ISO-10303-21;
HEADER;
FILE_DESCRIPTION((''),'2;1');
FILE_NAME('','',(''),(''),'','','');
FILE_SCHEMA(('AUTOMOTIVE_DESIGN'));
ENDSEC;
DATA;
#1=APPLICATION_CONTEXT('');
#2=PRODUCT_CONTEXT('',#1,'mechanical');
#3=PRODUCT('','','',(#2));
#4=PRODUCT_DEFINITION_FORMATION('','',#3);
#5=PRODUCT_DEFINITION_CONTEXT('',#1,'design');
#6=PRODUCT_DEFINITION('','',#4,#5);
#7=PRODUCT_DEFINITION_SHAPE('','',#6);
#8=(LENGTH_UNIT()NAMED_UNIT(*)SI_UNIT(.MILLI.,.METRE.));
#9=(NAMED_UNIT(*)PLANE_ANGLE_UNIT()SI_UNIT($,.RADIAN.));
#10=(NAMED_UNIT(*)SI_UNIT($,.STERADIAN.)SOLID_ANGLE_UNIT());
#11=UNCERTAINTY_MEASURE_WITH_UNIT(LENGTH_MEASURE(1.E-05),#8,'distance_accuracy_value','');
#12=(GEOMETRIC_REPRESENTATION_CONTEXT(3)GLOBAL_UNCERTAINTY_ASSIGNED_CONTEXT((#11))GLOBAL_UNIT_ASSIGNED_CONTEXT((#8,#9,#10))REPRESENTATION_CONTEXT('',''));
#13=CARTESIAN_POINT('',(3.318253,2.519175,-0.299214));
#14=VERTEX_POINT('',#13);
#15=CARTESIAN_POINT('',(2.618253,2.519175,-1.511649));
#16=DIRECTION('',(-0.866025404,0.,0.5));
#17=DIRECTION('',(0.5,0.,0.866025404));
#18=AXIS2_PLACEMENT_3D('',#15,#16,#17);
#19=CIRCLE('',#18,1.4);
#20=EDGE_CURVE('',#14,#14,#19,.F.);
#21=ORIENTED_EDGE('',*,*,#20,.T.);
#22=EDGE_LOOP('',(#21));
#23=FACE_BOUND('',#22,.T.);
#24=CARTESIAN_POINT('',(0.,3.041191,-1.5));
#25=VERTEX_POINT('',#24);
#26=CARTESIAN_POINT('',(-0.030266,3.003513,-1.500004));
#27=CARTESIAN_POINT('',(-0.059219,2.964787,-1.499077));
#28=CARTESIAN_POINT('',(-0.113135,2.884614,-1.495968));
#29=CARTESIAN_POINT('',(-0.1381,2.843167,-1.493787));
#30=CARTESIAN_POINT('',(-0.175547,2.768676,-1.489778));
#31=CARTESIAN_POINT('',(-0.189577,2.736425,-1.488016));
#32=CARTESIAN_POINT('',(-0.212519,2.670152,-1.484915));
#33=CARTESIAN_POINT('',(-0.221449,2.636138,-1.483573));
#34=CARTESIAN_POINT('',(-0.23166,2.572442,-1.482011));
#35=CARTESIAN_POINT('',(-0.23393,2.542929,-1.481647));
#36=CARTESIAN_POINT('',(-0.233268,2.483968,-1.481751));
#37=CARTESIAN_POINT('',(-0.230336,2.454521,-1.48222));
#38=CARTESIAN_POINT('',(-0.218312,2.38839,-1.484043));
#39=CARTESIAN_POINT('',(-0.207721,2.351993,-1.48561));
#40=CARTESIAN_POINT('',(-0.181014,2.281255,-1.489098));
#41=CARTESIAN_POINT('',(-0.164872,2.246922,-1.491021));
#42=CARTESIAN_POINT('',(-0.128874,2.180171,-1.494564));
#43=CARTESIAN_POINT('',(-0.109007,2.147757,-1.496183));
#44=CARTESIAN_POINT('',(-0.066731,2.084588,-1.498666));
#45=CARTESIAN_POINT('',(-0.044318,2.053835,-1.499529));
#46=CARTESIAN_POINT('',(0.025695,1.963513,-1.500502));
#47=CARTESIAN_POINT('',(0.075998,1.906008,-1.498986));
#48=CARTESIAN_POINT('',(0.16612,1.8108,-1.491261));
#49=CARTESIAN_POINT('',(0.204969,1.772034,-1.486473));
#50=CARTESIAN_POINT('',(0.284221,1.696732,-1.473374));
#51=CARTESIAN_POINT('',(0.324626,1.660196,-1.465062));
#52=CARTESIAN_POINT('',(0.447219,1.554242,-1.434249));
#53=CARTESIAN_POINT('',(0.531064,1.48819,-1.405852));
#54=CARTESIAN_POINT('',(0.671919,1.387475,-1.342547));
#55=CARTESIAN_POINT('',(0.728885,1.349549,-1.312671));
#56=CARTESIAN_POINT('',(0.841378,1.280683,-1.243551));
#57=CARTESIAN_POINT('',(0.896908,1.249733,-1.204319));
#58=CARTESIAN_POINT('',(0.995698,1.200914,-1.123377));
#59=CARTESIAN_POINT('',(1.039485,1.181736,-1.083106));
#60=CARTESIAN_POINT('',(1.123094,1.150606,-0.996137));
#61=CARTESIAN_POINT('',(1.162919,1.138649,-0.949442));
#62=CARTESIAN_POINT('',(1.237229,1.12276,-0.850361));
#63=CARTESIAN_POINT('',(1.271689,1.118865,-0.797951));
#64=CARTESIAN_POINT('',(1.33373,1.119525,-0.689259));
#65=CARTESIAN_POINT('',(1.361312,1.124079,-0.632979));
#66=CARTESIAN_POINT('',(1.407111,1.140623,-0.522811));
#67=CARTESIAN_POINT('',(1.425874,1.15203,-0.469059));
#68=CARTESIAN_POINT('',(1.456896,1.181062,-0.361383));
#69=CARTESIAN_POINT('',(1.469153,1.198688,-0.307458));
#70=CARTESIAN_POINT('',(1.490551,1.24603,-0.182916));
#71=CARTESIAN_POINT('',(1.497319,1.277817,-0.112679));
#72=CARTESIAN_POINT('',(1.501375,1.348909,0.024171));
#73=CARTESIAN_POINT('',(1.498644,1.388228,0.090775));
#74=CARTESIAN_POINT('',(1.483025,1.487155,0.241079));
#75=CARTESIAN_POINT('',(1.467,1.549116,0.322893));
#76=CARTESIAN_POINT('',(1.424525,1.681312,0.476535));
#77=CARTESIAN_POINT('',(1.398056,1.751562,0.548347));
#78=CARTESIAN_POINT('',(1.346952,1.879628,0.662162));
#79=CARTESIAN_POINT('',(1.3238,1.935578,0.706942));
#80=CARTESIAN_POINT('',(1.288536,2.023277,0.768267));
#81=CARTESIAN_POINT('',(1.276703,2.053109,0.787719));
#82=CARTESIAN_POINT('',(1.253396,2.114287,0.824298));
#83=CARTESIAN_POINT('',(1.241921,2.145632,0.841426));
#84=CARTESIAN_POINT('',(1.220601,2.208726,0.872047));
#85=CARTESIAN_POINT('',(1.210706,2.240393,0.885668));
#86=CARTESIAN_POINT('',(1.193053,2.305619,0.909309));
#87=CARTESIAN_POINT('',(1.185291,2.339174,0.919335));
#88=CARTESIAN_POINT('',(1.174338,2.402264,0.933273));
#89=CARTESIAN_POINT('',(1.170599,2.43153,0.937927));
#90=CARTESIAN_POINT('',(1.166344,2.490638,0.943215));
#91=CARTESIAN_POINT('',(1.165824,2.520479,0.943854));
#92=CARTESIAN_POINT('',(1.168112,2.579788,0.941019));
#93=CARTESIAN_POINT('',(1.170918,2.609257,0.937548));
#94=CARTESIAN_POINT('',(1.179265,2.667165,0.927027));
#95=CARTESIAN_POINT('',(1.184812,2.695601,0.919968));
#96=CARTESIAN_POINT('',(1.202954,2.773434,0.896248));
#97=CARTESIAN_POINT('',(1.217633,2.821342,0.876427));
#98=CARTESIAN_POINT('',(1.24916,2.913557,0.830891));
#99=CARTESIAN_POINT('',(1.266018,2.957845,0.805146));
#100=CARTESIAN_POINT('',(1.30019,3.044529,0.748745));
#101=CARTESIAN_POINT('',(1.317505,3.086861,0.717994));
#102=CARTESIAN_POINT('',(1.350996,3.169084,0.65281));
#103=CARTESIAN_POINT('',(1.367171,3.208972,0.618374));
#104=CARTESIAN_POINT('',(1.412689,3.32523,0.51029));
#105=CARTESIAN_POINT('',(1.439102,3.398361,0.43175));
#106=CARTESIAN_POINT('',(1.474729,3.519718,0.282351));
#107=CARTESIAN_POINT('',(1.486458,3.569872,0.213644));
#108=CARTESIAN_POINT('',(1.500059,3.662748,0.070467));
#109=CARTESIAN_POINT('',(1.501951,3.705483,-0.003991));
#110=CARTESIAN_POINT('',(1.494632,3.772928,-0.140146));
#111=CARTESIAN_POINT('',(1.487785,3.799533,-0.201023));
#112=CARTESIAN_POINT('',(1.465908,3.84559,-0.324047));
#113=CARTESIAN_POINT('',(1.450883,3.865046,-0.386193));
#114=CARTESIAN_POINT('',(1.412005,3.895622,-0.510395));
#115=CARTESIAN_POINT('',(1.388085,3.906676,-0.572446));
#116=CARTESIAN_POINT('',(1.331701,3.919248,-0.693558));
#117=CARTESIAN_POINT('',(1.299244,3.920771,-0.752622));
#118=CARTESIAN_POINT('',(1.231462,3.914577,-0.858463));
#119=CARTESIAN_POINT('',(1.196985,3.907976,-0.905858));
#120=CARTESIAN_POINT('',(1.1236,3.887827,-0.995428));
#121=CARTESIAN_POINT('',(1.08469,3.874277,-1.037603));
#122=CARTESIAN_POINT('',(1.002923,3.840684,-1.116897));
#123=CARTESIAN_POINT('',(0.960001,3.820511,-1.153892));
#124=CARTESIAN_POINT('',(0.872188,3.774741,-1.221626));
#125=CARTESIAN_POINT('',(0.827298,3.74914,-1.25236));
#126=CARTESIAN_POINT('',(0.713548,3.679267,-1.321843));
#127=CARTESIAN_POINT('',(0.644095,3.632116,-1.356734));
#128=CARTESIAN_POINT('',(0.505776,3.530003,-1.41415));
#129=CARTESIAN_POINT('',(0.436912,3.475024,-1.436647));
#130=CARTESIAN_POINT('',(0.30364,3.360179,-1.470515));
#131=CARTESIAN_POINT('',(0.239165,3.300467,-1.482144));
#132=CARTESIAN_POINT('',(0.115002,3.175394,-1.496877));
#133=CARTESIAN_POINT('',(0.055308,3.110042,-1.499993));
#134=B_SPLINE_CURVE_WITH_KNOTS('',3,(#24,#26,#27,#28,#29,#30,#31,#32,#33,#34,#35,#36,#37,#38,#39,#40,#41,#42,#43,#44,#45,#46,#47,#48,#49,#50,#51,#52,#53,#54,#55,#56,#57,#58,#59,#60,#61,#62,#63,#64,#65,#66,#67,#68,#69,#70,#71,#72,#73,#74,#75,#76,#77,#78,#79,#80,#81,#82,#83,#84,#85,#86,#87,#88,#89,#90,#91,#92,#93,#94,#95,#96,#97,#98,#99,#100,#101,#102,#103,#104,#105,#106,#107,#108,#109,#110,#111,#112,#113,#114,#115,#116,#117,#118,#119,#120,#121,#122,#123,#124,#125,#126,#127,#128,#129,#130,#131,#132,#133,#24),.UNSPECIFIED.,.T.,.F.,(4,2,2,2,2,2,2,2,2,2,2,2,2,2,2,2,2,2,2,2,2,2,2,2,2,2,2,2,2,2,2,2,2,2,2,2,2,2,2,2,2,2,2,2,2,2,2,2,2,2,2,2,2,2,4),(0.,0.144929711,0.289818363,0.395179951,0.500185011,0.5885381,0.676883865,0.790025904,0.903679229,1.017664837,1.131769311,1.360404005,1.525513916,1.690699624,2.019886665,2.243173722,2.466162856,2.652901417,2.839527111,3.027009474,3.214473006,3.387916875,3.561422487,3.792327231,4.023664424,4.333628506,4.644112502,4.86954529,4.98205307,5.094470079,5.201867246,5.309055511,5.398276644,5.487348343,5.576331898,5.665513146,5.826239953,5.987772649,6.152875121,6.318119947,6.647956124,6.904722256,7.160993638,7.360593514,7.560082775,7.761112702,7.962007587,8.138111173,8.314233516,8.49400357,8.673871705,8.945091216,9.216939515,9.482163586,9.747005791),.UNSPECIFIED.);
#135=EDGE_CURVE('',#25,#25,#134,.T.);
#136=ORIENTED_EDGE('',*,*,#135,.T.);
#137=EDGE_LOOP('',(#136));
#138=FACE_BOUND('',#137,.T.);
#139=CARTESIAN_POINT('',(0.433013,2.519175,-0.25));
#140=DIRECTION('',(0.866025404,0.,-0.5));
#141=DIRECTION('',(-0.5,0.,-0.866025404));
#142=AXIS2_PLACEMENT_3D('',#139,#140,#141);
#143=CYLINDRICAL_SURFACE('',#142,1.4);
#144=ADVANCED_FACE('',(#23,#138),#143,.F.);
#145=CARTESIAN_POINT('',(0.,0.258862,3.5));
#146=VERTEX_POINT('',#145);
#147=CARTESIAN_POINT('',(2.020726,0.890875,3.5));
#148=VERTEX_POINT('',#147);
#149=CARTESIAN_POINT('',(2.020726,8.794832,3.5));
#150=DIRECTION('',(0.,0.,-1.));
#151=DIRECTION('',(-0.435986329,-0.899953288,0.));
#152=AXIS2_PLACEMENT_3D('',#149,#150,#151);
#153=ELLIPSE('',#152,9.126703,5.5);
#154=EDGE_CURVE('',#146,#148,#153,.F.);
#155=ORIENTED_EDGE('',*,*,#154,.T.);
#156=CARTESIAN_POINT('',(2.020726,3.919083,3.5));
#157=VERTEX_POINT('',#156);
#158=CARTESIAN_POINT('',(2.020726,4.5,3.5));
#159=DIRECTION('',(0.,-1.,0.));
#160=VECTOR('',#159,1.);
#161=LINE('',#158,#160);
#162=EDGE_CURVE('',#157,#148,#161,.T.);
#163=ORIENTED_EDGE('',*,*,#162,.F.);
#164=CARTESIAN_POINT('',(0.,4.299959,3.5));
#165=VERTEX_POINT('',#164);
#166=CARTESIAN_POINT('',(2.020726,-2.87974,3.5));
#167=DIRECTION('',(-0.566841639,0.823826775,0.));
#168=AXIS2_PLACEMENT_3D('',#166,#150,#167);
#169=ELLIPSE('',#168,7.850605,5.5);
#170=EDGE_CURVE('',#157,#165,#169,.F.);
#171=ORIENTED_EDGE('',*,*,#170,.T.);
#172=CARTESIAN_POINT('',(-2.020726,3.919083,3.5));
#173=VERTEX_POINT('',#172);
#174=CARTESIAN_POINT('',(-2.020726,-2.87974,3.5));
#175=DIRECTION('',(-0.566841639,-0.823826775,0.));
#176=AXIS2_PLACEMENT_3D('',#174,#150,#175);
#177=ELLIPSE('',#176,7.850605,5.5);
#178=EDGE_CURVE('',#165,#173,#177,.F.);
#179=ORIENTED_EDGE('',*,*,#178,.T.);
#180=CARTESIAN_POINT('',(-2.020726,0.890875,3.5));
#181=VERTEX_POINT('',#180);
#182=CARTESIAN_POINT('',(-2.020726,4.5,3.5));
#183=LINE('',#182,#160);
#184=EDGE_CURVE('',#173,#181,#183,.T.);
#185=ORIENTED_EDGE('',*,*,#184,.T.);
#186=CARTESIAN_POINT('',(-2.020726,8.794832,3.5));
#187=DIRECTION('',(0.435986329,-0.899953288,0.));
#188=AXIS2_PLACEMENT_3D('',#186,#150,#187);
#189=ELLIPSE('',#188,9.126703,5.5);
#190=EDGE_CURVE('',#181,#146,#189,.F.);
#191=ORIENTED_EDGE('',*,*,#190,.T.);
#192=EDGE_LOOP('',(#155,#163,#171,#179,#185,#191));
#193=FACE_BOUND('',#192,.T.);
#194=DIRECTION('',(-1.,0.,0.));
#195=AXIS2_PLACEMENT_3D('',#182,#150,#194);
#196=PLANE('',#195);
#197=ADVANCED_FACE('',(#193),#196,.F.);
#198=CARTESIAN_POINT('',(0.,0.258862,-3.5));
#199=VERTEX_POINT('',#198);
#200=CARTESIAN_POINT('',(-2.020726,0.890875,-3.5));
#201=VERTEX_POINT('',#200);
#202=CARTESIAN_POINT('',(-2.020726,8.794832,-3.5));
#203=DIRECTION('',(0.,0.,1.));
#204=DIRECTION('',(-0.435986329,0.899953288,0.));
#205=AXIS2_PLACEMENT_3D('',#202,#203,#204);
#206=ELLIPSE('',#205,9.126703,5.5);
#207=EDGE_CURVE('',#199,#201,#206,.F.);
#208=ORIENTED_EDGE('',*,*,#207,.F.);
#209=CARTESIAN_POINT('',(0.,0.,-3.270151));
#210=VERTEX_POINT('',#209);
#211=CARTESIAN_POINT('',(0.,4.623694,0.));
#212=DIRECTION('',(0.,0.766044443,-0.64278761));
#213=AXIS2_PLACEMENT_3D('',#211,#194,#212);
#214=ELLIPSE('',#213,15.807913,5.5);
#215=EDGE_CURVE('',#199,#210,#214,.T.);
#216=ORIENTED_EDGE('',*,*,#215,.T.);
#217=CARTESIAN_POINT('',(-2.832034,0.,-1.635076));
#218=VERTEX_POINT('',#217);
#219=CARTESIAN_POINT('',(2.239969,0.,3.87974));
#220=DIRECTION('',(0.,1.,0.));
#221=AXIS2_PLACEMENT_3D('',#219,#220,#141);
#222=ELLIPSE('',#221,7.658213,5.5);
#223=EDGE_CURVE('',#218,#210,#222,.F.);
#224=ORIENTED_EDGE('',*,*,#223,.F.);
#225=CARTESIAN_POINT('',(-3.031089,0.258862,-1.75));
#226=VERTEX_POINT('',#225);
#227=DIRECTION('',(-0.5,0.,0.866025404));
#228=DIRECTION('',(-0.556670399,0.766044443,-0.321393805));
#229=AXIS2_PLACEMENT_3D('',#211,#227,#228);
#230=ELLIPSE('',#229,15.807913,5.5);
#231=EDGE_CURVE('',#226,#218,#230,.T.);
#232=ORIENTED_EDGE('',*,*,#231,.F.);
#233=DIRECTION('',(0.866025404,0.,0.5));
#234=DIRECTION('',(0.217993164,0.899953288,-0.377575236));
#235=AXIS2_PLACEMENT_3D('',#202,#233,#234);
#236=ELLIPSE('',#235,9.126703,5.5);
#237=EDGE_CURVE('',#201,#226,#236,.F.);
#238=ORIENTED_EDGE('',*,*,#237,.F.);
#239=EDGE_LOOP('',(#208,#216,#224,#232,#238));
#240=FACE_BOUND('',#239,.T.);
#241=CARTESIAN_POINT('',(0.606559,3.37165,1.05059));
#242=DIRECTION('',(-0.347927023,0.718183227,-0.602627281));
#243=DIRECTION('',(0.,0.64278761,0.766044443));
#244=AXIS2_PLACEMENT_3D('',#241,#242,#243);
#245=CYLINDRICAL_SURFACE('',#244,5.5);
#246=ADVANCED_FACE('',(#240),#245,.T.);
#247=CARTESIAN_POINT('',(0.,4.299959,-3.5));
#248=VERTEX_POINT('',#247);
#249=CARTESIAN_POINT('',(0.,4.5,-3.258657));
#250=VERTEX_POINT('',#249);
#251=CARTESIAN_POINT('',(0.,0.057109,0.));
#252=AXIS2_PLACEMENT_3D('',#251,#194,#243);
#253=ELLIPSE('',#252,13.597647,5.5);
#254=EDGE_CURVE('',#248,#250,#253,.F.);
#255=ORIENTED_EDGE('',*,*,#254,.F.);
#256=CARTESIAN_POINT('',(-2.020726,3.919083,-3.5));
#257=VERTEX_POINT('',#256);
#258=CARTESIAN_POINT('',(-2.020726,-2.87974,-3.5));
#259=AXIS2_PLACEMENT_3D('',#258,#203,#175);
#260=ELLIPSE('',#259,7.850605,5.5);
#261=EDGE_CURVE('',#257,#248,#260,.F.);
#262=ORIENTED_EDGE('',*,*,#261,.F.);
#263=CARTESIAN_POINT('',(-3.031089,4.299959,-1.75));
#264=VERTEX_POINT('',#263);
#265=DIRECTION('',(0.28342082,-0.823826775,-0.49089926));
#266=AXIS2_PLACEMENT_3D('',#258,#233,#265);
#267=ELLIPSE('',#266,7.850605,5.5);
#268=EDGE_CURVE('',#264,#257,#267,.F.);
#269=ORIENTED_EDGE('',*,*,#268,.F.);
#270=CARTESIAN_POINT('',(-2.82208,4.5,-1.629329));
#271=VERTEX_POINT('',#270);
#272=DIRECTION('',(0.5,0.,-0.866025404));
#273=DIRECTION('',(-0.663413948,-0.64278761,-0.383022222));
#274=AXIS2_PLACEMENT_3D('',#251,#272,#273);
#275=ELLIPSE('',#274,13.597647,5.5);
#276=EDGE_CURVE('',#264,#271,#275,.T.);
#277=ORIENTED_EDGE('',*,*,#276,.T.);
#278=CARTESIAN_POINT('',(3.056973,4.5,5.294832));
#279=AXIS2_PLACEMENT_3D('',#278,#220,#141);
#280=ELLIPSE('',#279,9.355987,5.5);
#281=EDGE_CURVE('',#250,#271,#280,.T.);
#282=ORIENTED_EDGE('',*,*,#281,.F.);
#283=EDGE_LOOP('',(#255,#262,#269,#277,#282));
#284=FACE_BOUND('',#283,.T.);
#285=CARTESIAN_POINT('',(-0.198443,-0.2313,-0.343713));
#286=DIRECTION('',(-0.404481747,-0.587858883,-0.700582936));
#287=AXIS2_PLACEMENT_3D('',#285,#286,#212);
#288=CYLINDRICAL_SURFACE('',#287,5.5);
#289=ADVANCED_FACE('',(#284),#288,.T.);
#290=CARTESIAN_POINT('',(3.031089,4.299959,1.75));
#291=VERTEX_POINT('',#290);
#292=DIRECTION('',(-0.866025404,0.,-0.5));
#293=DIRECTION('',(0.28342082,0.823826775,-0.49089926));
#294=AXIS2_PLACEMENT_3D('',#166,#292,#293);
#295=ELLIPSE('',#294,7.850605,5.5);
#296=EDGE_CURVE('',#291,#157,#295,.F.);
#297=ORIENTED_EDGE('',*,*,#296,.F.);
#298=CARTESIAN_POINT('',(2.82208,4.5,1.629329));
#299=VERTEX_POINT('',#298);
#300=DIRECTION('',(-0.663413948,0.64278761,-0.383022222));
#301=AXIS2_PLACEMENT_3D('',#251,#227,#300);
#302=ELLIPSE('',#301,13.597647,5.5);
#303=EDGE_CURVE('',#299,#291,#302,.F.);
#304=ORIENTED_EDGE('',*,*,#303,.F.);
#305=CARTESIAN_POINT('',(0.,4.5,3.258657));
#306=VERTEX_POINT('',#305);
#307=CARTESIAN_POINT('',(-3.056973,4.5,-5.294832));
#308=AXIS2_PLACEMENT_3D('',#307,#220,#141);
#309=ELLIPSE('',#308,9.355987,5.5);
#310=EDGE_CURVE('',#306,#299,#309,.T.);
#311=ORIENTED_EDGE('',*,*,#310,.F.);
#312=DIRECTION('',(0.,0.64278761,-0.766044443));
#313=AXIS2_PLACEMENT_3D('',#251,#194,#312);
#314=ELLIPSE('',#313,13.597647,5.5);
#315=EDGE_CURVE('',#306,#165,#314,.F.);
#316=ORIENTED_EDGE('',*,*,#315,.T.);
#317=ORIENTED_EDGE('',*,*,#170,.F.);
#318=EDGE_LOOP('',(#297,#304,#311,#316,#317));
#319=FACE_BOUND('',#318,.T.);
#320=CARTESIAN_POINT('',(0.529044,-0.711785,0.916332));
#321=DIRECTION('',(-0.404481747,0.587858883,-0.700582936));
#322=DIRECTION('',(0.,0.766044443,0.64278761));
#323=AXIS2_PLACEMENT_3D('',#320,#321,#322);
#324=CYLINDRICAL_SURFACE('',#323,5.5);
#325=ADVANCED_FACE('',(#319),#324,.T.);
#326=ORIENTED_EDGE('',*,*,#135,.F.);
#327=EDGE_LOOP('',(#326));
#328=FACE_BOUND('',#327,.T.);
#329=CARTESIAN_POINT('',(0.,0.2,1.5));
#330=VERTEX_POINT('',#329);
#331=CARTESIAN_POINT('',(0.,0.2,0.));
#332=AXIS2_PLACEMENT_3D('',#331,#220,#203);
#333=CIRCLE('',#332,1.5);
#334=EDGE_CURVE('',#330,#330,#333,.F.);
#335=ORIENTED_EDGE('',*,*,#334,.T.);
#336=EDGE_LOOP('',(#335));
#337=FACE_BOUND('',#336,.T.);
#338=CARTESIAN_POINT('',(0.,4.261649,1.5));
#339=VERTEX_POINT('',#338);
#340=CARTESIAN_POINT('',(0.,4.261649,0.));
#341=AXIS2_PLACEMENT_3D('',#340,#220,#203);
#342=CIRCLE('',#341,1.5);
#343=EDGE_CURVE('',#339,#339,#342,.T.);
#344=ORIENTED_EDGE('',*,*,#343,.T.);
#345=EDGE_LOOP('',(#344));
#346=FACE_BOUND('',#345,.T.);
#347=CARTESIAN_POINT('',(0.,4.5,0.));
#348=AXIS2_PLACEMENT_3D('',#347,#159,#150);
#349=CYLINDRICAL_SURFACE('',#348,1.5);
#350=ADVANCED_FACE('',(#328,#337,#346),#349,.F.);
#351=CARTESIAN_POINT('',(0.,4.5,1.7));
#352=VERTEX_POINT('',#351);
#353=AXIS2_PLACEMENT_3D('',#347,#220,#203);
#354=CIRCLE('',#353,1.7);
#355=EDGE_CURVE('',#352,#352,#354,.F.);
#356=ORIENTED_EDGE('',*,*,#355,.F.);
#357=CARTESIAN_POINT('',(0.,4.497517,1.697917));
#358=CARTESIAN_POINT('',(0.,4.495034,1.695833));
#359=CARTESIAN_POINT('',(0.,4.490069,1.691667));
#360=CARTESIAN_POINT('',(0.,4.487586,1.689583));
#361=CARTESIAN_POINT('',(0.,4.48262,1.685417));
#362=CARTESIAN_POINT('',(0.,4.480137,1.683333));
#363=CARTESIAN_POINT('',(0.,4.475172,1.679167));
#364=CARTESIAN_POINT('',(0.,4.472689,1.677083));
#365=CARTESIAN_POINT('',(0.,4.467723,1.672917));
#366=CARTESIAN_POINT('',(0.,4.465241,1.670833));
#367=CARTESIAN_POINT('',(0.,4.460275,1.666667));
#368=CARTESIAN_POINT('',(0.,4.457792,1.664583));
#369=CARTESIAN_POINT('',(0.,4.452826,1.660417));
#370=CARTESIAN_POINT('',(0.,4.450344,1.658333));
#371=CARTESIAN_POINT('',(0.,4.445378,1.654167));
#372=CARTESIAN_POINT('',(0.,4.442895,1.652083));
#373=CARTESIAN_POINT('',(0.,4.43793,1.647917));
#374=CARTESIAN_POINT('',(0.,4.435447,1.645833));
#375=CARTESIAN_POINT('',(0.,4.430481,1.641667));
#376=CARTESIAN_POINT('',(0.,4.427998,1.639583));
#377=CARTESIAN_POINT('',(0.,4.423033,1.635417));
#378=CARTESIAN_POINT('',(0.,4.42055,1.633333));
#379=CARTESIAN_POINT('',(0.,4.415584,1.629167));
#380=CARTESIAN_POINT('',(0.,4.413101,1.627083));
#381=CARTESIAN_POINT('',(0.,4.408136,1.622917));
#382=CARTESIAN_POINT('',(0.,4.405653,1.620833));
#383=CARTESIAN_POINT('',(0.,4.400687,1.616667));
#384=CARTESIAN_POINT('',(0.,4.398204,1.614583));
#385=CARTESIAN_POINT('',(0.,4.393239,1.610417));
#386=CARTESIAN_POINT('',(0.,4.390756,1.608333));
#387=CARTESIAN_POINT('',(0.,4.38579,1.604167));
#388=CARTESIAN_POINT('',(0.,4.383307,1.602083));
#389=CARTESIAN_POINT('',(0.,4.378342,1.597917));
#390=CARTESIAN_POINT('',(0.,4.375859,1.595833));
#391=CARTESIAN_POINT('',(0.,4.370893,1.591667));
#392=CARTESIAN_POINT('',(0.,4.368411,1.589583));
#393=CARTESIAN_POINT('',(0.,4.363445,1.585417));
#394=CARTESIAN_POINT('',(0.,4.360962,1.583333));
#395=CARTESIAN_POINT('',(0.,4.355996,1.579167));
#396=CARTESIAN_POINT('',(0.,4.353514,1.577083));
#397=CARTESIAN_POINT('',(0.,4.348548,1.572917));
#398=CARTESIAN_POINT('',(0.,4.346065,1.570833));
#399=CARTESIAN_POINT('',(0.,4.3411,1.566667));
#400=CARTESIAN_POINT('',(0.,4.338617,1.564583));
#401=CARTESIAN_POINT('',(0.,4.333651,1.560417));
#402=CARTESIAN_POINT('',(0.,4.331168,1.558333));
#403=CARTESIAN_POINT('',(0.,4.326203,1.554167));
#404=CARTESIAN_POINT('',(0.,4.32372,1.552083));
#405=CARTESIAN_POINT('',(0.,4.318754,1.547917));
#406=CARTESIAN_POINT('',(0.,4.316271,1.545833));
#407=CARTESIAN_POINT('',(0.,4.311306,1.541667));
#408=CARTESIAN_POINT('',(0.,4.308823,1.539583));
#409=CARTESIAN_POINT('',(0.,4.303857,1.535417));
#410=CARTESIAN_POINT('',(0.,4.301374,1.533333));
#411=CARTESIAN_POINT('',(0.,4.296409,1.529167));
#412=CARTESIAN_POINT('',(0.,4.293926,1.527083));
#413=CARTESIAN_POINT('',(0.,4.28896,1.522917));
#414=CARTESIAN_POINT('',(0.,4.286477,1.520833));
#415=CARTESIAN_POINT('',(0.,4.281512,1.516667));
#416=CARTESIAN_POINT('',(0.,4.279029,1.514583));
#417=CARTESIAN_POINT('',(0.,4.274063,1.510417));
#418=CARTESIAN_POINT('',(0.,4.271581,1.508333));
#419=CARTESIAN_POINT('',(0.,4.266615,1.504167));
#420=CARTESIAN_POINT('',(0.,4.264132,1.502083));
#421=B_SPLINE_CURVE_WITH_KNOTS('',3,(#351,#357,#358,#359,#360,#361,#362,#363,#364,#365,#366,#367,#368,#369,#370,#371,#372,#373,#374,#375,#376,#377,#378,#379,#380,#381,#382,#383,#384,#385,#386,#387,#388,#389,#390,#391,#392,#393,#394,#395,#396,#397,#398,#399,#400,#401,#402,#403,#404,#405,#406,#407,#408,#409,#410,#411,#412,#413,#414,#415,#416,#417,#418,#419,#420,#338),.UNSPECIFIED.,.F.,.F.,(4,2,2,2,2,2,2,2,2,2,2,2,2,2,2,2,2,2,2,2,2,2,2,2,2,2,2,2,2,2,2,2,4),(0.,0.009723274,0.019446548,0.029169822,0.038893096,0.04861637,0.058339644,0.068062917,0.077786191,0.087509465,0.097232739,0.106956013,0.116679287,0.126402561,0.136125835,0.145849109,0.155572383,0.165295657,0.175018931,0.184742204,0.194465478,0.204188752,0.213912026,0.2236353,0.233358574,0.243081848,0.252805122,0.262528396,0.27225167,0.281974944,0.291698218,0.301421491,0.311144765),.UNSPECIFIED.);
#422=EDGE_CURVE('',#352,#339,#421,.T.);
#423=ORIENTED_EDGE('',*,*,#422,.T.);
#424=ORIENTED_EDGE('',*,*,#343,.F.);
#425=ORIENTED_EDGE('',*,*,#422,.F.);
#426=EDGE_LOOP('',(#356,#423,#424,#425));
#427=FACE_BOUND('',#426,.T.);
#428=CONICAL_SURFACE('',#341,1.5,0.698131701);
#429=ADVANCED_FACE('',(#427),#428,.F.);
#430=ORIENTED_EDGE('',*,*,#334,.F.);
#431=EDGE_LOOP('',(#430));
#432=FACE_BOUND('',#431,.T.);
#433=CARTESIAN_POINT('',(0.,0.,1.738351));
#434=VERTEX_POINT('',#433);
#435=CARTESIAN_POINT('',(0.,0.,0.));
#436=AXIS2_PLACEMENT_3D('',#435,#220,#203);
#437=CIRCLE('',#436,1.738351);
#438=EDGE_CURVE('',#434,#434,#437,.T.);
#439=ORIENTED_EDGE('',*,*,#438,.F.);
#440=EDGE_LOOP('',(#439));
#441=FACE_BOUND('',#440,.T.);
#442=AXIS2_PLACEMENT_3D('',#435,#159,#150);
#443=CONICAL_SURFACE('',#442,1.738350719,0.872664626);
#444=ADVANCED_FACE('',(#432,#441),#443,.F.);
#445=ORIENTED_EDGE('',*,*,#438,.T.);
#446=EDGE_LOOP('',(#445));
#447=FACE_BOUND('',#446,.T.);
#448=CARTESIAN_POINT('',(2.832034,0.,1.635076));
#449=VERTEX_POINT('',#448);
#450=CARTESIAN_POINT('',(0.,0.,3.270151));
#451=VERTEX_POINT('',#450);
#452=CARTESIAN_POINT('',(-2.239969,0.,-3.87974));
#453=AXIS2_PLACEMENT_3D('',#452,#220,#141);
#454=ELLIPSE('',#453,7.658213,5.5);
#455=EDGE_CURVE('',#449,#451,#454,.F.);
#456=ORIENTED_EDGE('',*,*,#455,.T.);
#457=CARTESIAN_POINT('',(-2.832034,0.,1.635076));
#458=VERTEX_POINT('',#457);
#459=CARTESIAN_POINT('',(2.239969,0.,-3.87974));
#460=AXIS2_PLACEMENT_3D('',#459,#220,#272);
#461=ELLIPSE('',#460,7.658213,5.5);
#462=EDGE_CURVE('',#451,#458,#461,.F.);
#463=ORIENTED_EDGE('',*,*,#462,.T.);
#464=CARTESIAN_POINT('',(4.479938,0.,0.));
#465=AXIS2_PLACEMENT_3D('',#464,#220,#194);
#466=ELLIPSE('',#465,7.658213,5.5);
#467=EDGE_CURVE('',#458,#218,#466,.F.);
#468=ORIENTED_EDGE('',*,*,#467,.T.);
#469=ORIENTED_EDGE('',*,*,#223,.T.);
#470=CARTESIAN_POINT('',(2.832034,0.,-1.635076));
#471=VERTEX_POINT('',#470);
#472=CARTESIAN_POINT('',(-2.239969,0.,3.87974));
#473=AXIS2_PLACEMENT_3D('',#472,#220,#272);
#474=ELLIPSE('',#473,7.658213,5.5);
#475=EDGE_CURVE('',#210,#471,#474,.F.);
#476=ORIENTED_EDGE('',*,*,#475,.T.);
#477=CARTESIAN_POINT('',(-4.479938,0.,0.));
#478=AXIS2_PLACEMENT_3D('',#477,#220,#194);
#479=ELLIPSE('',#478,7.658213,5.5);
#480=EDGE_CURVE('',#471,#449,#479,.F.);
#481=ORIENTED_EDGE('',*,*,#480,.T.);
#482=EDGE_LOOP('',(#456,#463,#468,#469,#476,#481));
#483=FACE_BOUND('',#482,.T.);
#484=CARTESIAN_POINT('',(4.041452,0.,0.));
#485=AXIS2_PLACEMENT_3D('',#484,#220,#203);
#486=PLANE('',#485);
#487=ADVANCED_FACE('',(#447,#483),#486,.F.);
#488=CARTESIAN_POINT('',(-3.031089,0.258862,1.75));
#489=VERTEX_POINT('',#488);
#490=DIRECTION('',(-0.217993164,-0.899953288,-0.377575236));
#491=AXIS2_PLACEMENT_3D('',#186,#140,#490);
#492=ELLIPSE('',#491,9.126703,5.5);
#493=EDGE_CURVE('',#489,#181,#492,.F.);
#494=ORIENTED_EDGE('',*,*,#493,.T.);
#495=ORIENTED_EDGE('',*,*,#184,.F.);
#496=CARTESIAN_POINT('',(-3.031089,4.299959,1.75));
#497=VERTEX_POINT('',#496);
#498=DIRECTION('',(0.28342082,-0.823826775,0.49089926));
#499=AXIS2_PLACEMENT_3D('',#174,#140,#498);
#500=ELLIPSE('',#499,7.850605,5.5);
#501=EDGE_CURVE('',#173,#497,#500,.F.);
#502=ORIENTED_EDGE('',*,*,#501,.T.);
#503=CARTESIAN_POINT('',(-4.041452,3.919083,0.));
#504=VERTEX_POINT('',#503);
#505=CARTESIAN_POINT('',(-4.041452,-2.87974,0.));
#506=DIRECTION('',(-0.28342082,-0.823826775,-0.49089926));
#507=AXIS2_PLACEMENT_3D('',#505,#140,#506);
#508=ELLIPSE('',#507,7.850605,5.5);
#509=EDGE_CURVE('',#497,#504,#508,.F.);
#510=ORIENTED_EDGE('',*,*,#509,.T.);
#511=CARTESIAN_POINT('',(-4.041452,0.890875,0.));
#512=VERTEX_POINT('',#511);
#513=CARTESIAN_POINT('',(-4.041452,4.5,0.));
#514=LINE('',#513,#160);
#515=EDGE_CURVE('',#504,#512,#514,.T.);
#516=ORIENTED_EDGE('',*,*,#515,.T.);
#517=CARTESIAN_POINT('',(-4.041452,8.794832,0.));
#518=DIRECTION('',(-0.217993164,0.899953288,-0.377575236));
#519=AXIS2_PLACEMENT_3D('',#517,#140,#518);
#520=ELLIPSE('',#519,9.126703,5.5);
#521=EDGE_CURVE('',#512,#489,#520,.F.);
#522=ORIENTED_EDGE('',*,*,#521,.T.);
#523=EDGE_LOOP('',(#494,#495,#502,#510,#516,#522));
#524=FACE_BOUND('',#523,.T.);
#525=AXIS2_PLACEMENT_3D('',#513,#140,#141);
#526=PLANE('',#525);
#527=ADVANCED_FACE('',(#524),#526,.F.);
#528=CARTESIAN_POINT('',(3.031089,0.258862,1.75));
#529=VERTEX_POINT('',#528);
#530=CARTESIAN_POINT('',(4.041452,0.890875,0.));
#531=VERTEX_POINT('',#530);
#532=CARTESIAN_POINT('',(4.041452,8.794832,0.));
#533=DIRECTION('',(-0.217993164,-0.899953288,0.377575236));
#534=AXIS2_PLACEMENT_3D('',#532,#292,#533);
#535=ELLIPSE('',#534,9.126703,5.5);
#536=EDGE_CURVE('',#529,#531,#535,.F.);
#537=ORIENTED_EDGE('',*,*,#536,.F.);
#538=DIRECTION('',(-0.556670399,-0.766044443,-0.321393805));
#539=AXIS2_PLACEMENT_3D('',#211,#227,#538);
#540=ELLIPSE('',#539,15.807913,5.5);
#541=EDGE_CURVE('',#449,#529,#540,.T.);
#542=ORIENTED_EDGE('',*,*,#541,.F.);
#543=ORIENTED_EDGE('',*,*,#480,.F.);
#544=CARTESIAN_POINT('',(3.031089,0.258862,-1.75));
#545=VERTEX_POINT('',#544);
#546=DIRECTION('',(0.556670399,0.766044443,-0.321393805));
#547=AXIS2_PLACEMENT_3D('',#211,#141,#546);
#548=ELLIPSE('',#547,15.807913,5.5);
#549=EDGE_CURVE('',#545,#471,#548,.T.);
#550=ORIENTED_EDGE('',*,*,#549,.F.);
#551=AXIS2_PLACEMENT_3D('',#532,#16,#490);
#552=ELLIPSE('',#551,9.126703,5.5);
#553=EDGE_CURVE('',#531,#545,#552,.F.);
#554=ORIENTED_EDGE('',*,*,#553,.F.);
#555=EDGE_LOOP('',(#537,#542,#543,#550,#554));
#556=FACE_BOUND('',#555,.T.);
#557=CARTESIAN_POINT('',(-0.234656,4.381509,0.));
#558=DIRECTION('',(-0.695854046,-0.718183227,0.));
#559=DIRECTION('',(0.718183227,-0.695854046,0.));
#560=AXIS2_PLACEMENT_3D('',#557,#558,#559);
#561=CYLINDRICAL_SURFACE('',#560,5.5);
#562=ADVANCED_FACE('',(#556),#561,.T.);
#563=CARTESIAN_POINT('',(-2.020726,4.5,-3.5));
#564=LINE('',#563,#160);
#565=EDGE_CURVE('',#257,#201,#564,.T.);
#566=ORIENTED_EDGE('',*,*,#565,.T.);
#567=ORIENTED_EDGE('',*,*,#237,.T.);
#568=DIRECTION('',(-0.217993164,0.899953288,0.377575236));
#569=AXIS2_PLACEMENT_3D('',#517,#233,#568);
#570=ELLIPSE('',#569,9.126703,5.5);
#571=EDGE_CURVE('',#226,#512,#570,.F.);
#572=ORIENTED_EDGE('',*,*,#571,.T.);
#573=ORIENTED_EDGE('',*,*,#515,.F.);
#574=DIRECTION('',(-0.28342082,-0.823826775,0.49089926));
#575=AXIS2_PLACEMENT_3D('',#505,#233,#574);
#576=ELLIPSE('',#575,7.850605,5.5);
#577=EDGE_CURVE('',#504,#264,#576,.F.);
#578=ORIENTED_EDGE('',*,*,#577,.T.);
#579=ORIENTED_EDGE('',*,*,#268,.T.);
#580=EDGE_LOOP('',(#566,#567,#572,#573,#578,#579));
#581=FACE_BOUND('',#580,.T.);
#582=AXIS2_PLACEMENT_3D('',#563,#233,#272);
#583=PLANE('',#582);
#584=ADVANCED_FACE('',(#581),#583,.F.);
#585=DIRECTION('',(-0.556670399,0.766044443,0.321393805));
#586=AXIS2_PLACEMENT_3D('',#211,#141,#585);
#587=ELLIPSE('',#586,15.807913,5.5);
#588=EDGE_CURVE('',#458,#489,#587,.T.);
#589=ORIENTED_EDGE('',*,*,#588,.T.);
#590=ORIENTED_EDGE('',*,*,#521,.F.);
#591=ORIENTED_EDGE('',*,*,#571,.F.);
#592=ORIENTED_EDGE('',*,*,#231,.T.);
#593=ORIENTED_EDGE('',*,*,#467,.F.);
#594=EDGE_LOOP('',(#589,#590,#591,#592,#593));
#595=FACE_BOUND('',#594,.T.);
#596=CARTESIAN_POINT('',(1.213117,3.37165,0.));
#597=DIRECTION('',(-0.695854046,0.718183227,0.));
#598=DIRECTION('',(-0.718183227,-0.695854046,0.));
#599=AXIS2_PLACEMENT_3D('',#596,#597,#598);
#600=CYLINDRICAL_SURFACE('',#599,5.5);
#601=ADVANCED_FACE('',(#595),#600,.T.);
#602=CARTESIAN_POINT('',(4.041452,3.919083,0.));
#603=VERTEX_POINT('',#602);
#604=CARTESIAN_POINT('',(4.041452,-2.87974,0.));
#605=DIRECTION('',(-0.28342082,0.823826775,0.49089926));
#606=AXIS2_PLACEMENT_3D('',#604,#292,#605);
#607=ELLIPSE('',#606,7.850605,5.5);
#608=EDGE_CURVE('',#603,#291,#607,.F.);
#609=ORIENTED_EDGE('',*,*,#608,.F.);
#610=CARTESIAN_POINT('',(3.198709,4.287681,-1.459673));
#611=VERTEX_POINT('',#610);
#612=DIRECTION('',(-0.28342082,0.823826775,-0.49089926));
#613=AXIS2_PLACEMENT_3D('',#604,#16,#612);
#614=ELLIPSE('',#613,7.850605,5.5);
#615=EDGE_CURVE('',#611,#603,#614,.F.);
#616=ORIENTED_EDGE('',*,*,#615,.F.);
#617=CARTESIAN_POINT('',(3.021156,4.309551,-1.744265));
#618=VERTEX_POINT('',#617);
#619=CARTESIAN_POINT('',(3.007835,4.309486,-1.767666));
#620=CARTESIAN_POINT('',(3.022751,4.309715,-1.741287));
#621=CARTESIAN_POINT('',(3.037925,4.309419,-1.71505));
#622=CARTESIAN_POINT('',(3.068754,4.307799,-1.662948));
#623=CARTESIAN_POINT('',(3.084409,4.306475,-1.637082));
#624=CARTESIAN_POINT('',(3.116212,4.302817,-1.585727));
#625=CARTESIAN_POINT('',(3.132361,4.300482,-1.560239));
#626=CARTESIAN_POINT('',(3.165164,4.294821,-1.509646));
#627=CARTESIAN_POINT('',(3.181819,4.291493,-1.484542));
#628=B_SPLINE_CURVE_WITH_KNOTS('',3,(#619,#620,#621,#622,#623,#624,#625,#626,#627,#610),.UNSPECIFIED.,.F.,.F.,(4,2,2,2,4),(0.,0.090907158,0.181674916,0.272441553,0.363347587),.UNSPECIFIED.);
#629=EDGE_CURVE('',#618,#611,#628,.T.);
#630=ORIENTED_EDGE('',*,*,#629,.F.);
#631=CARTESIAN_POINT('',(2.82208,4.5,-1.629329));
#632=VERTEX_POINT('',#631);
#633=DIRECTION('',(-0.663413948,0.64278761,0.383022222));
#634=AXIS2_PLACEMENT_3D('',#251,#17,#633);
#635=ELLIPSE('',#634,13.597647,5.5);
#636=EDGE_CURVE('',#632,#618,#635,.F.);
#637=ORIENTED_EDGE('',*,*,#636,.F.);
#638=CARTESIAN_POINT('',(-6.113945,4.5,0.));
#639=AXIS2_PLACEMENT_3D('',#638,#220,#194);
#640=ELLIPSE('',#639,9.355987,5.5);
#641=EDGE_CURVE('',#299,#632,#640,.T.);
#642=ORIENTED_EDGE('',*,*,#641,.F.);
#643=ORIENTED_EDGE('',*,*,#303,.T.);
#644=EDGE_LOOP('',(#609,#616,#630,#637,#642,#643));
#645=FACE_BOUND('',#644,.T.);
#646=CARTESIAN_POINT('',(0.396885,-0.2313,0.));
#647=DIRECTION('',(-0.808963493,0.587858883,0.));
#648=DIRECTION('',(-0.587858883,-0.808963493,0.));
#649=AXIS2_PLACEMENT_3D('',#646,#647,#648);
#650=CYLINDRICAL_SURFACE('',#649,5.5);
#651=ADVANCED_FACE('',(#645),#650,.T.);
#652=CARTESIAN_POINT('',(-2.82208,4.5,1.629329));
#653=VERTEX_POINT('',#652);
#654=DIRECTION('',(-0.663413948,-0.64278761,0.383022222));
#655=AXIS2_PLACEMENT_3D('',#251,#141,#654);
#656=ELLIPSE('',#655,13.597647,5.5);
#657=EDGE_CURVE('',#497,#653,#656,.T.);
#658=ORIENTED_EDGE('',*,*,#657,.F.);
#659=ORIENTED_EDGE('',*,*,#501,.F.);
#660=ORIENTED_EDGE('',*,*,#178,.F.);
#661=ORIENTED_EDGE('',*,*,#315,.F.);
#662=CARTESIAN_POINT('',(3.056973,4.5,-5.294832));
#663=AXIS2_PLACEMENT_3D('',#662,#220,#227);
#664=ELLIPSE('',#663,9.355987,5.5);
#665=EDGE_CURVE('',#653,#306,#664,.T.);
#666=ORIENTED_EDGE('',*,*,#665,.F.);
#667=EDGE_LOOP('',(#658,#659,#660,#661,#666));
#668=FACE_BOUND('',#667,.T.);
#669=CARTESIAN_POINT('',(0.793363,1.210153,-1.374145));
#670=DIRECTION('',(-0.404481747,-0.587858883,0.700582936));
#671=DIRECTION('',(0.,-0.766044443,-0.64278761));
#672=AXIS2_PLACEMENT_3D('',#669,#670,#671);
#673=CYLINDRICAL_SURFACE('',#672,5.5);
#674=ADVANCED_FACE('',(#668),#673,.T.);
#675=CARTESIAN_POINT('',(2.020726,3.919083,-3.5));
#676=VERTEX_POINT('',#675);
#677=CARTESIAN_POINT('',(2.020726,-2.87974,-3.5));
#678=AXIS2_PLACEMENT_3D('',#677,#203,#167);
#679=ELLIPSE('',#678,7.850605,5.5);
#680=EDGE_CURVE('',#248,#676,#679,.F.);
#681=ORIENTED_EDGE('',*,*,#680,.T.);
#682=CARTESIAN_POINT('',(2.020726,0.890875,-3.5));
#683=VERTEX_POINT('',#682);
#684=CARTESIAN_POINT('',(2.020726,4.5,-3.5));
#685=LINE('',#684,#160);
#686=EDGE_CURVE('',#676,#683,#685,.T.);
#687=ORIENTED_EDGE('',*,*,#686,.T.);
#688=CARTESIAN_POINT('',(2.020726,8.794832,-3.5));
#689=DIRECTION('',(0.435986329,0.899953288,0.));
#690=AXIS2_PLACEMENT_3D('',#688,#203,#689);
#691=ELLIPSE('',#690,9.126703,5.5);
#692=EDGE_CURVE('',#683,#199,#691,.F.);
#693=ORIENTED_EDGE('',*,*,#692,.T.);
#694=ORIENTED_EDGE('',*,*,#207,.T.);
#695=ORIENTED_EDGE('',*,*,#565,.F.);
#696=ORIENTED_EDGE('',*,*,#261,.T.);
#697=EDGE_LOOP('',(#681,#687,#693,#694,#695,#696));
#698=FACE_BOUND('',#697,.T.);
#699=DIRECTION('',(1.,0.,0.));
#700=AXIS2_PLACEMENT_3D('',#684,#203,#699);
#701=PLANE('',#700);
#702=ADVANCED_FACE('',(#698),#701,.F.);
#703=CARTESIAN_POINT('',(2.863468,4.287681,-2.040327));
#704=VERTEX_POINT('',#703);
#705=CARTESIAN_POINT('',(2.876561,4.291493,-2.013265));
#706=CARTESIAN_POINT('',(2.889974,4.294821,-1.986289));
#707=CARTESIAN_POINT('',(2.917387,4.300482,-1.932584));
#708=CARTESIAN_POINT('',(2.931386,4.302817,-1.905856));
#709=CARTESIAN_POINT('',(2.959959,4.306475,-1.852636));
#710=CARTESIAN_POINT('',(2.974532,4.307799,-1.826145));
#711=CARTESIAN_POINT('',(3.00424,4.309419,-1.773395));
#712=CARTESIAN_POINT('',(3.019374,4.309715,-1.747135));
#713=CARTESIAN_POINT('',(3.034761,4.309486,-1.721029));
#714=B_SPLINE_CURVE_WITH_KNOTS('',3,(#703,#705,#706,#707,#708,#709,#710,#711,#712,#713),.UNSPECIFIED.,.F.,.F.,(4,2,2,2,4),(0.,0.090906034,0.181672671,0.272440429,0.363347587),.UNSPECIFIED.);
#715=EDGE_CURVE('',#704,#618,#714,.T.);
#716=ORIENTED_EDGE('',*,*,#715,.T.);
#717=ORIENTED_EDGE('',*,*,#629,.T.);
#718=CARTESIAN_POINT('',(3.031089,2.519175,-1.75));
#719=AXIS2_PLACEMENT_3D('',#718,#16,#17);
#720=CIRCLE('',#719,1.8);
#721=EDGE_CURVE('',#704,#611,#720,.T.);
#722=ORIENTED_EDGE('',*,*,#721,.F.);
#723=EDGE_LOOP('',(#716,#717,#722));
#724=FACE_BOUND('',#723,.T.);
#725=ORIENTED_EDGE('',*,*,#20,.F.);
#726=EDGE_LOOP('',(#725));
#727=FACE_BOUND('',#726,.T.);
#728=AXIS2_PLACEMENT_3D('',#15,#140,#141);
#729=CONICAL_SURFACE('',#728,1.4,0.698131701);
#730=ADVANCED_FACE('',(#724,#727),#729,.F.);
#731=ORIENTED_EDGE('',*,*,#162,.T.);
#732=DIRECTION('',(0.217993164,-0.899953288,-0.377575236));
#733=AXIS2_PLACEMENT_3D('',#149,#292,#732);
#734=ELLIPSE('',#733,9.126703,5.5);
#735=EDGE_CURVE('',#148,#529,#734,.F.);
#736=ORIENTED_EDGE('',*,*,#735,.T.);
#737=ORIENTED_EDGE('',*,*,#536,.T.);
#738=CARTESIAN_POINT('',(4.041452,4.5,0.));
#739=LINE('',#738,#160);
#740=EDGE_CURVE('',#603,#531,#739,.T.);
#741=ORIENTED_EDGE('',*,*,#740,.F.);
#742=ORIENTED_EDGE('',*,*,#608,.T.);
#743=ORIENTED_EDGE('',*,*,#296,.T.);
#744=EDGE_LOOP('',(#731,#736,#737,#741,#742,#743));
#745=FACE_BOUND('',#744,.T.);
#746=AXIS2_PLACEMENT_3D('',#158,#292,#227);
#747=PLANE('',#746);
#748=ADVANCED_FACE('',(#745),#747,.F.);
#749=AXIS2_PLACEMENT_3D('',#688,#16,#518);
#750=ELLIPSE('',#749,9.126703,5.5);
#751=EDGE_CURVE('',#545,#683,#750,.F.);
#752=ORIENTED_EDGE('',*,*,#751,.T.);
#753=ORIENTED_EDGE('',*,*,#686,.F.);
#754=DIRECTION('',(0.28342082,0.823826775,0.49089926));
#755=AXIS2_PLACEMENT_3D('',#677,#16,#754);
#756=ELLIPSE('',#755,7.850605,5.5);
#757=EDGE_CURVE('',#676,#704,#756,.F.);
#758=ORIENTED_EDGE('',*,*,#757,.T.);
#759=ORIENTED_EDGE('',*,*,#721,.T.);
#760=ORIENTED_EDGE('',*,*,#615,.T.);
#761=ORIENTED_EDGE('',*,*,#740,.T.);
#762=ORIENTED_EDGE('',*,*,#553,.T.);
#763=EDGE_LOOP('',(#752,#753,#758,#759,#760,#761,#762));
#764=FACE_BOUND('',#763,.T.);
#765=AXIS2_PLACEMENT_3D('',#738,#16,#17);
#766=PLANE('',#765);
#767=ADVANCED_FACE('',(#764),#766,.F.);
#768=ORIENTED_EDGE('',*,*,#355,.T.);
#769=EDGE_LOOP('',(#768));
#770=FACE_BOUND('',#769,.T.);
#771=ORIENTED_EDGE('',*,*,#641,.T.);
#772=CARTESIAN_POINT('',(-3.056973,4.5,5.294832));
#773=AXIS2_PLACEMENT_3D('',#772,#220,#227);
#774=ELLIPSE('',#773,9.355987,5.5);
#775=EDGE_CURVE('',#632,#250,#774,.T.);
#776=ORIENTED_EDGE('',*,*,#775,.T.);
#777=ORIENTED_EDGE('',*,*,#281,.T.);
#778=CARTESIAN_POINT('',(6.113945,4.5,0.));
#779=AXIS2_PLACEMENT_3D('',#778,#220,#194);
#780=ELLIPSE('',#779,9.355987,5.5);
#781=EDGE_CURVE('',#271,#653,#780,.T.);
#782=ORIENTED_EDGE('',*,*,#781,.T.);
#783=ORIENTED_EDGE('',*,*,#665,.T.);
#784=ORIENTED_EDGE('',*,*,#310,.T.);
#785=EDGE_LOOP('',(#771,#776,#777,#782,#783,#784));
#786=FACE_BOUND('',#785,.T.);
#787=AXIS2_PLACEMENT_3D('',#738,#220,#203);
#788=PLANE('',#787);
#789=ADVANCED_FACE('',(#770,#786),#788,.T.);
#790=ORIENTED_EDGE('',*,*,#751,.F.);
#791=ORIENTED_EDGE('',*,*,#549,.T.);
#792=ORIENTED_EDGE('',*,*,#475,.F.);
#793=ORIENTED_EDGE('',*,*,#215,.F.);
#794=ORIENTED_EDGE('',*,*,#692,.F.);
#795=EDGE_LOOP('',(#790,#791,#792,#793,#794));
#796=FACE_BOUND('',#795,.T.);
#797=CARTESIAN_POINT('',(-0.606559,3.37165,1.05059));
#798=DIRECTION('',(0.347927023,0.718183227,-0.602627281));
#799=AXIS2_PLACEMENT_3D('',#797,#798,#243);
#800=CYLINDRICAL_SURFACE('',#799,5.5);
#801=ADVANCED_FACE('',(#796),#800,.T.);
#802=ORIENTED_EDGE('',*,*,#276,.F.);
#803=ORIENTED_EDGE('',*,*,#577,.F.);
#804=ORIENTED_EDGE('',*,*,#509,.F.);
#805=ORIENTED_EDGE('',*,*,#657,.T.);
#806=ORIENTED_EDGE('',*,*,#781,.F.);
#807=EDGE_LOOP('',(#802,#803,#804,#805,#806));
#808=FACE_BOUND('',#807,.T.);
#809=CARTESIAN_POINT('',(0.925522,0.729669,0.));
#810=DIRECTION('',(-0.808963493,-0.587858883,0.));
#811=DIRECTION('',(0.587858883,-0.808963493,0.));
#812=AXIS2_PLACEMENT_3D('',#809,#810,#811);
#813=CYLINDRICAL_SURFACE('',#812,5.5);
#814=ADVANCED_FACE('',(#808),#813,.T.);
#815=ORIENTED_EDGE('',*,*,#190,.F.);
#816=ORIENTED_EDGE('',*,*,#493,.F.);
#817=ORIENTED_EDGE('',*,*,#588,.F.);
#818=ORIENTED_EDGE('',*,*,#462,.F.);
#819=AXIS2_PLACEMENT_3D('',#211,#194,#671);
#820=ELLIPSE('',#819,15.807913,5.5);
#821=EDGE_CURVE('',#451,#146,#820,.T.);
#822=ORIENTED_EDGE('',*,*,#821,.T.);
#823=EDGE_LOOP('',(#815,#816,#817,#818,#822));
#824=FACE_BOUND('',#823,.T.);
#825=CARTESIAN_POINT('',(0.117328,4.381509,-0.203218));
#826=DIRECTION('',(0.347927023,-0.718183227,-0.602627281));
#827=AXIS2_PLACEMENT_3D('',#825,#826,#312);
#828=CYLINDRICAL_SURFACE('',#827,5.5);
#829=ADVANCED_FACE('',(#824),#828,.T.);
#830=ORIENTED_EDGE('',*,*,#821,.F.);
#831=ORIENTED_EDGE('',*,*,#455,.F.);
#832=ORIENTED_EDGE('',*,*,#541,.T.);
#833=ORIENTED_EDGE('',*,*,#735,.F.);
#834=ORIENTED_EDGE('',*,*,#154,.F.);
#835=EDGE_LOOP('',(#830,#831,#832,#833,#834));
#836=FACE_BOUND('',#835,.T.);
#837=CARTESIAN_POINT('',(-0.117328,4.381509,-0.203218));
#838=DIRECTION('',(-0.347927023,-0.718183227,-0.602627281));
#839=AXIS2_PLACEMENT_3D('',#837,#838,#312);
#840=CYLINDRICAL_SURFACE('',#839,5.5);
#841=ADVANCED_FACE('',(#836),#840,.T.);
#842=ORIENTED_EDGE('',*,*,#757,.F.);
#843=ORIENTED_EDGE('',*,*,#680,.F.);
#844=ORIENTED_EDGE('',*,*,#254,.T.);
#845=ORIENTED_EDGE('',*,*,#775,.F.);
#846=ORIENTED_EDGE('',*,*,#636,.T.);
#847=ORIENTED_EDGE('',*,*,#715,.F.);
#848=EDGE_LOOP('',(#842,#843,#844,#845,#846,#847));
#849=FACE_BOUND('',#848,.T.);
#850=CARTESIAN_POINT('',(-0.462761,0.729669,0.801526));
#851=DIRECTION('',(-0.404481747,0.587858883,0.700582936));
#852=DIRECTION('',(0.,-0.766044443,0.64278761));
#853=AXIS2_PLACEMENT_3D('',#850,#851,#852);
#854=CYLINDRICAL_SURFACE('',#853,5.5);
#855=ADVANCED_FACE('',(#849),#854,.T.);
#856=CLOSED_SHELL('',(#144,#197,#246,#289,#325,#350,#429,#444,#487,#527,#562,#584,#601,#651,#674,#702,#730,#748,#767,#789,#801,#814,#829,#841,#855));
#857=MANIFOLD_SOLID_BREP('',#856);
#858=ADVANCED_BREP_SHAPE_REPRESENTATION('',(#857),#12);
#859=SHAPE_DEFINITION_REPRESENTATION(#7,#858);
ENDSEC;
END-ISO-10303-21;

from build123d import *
from OCP.BRepFilletAPI import BRepFilletAPI_MakeChamfer

# Parameters (mm, degrees)
SKETCH1_R           = 1.5
BOSS_EXTRUDE1_DEPTH = 4.5
CHAMFER1_SIZE       = 0.2
CHAMFER1_SIZE2      = 0.238350719
SKETCH2_R           = 1.4
CUT_EXTRUDE1_DEPTH  = 3
CHAMFER2_SIZE       = 0.4
CHAMFER2_SIZE_2     = 0.476701437
FILLET1_R           = 5.5


with BuildPart() as part:
    # Sketch1 → Boss-Extrude1 (new body)
    with BuildSketch(Plane(origin=(0, 0, 0), x_dir=(1, 0, 0), z_dir=(0, 1, 0))):
        Polygon((4.041451884, 0), (2.020725942, 3.5), (-2.020725942, 3.5), (-4.041451884, 0), (-2.020725942, -3.5), (2.020725942, -3.5), align=None)
        with Locations(Location((0, 0, 0), (0, 0, 270))):
            Circle(SKETCH1_R, mode=Mode.SUBTRACT)
    extrude(amount=BOSS_EXTRUDE1_DEPTH)

    # Chamfer1: one chamfer whose edges measure the first distance from different faces: ONE call of the kernel's chamfer builder (chamfer() names one face for all edges)
    chamfer1_edges_1 = [part.edges().sort_by_distance(p)[0] for p in [
        (0, 4.5, -3.5),
    ]]
    chamfer1_side_1 = [part.faces().sort_by_distance(p)[0] for p in [
        (0, 2.25, -3.5),
    ]]
    chamfer1_edges_2 = [part.edges().sort_by_distance(p)[0] for p in [
        (-3.031088913, 4.5, -1.75),
    ]]
    chamfer1_side_2 = [part.faces().sort_by_distance(p)[0] for p in [
        (-3.031088913, 2.25, -1.75),
    ]]
    chamfer1_edges_3 = [part.edges().sort_by_distance(p)[0] for p in [
        (-3.031088913, 4.5, 1.75),
    ]]
    chamfer1_side_3 = [part.faces().sort_by_distance(p)[0] for p in [
        (-3.031088913, 2.25, 1.75),
    ]]
    chamfer1_edges_4 = [part.edges().sort_by_distance(p)[0] for p in [
        (0, 0, -1.5),
    ]]
    chamfer1_side_4 = [part.faces().sort_by_distance(p)[0] for p in [
        (0, 2.25, -1.5),
    ]]
    chamfer1_edges_5 = [part.edges().sort_by_distance(p)[0] for p in [
        (0, 4.5, -1.5),
    ]]
    chamfer1_side_5 = [part.faces().sort_by_distance(p)[0] for p in [
        (2.938487617, 4.5, -1.696536617),
    ]]
    chamfer1_edges_6 = [part.edges().sort_by_distance(p)[0] for p in [
        (0, 4.5, 3.5),
    ]]
    chamfer1_side_6 = [part.faces().sort_by_distance(p)[0] for p in [
        (0, 2.25, 3.5),
    ]]
    chamfer1_edges_7 = [part.edges().sort_by_distance(p)[0] for p in [
        (3.031088913, 4.5, 1.75),
    ]]
    chamfer1_side_7 = [part.faces().sort_by_distance(p)[0] for p in [
        (3.031088913, 2.25, 1.75),
    ]]
    chamfer1_edges_8 = [part.edges().sort_by_distance(p)[0] for p in [
        (0, 0, 3.5),
        (-3.031088913, 0, 1.75),
        (-3.031088913, 0, -1.75),
        (0, 0, -3.5),
        (3.031088913, 0, -1.75),
        (3.031088913, 0, 1.75),
    ]]
    chamfer1_side_8 = [part.faces().sort_by_distance(p)[0] for p in [
        (2.938487617, 0, -1.696536617),
    ]]
    chamfer1_edges_9 = [part.edges().sort_by_distance(p)[0] for p in [
        (3.031088913, 4.5, -1.75),
    ]]
    chamfer1_side_9 = [part.faces().sort_by_distance(p)[0] for p in [
        (3.031088913, 2.25, -1.75),
    ]]
    chamfer1 = BRepFilletAPI_MakeChamfer(part.part.solid().wrapped)
    for e in chamfer1_edges_1:
        chamfer1.Add(CHAMFER1_SIZE, CHAMFER1_SIZE2, e.wrapped, chamfer1_side_1[0].wrapped)  # the first distance lies on this face
    for e in chamfer1_edges_2:
        chamfer1.Add(CHAMFER1_SIZE, CHAMFER1_SIZE2, e.wrapped, chamfer1_side_2[0].wrapped)  # the first distance lies on this face
    for e in chamfer1_edges_3:
        chamfer1.Add(CHAMFER1_SIZE, CHAMFER1_SIZE2, e.wrapped, chamfer1_side_3[0].wrapped)  # the first distance lies on this face
    for e in chamfer1_edges_4:
        chamfer1.Add(CHAMFER1_SIZE, CHAMFER1_SIZE2, e.wrapped, chamfer1_side_4[0].wrapped)  # the first distance lies on this face
    for e in chamfer1_edges_5:
        chamfer1.Add(CHAMFER1_SIZE, CHAMFER1_SIZE2, e.wrapped, chamfer1_side_5[0].wrapped)  # the first distance lies on this face
    for e in chamfer1_edges_6:
        chamfer1.Add(CHAMFER1_SIZE, CHAMFER1_SIZE2, e.wrapped, chamfer1_side_6[0].wrapped)  # the first distance lies on this face
    for e in chamfer1_edges_7:
        chamfer1.Add(CHAMFER1_SIZE, CHAMFER1_SIZE2, e.wrapped, chamfer1_side_7[0].wrapped)  # the first distance lies on this face
    for e in chamfer1_edges_8:
        chamfer1.Add(CHAMFER1_SIZE, CHAMFER1_SIZE2, e.wrapped, chamfer1_side_8[0].wrapped)  # the first distance lies on this face
    for e in chamfer1_edges_9:
        chamfer1.Add(CHAMFER1_SIZE, CHAMFER1_SIZE2, e.wrapped, chamfer1_side_9[0].wrapped)  # the first distance lies on this face
    add(Compound.cast(chamfer1.Shape()), mode=Mode.REPLACE)

    # Sketch2 → Cut-Extrude1 (cut)
    with BuildSketch(Plane(origin=(3.031088913, 0, -1.75), x_dir=(-0.5, 0, -0.8660254037844386), z_dir=(0.8660254037844387, 0, -0.5000000000000001))):
        with Locations((0, 2.519175359)):
            Circle(SKETCH2_R)
    extrude(amount=-CUT_EXTRUDE1_DEPTH, mode=Mode.SUBTRACT)

    # Chamfer2
    # the kernel refuses this chamfer: 0.476701437, 0.4 mm, written as the material it takes off along each edge
    with BuildSketch(Plane(origin=(3.031088913, 2.519175359, -1.75), x_dir=(-0.5000000000000001, 0, -0.8660254037844386), z_dir=(0, -1, 0))) as chamfer2_piece_1:
        Polygon((1.4 + CHAMFER2_SIZE, 0), (1.4, -CHAMFER2_SIZE_2), (1.4, 0), align=None)
    revolve(axis=Axis((3.031088913, 2.519175359, -1.75), (0.8660254037844387, 0, -0.5000000000000001)), mode=Mode.SUBTRACT)

    # Fillet1
    # the kernel refuses this fillet: 5.5 mm, written as the material it takes off along each edge
    with BuildSketch(Plane(origin=(0.15679227, -4.094610415, 0), x_dir=(0.2750801350308494, 0.26652756240167075, 0.9237391286459793), z_dir=(-0.6958540455341976, 0.7181832268395656, -6.118874277733391e-15)), Plane(origin=(-0.15679227, -4.094610415, 0), x_dir=(-0.2750801350308542, 0.2665275624016659, -0.9237391286459793), z_dir=(0.6958540455341957, 0.7181832268395675, 0)), Plane(origin=(-0.078396135, -4.094610415, -0.135786089), x_dir=(0.6624414843616913, 0.266527562401667, -0.7000959493361638), z_dir=(0.347927022767099, 0.7181832268395667, 0.6026272807587874)), Plane(origin=(0.078396135, -4.094610415, -0.135786089), x_dir=(0.937521619392547, 0.2665275624016655, 0.2236431793098164), z_dir=(-0.3479270227670974, 0.718183226839567, 0.6026272807587876))) as fillet1_piece_1:
        with BuildLine():
            CenterArc((FILLET1_R * 0.414643279343, FILLET1_R), FILLET1_R, 224.957975764, 45.042024236)
            Line((-FILLET1_R * 0.292981947048, FILLET1_R * 0.293412044417), (0, 0))
            Line((0, 0), (FILLET1_R * 0.414643279343, 0))
        make_face()
    extrude(amount=11.734570278, mode=Mode.SUBTRACT)
    with BuildSketch(Plane(origin=(0.078396135, -4.094610415, 0.135786089), x_dir=(0.9375216193925491, 0.26652756240166126, -0.22364317930981242), z_dir=(-0.3479270227670917, 0.7181832268395687, -0.602627280758789)), Plane(origin=(-0.078396135, -4.094610415, 0.135786089), x_dir=(0.6624414843616925, 0.2665275624016671, 0.7000959493361628), z_dir=(0.3479270227670974, 0.718183226839567, -0.6026272807587876))) as fillet1_piece_2:
        with BuildLine():
            CenterArc((FILLET1_R * 0.414643279343, -FILLET1_R), FILLET1_R, 90, 45.042024236)
            Line((-FILLET1_R * 0.292981947048, -FILLET1_R * 0.293412044417), (0, 0))
            Line((0, 0), (FILLET1_R * 0.414643279343, 0))
        make_face()
    extrude(amount=11.734570278, mode=Mode.SUBTRACT)
    with BuildSketch(Plane(origin=(3.908343828, 1.556605641, -6.769450083), x_dir=(0.7256118681846667, -0.25999585509227957, 0.6370946335391565), z_dir=(-0.40448174665200637, 0.5878588831525535, 0.7005829359354784)), Plane(origin=(-3.908343828, 1.556605641, -6.769450083), x_dir=(0.9145460713519834, -0.25999585509227496, -0.3098509943658236), z_dir=(0.4044817466520002, 0.5878588831525553, 0.7005829359354805)), Plane(origin=(-7.816687655, 1.556605641, 0), x_dir=(0.18893420316732476, -0.2599958550922833, -0.9469456279049819), z_dir=(0.8089634933040146, 0.5878588831525519, 7.47827698098615e-15))) as fillet1_piece_3:
        with BuildLine():
            CenterArc((FILLET1_R * 0.339400484434, -FILLET1_R), FILLET1_R, 90, 37.494474502)
            Line((-FILLET1_R * 0.269284432231, -FILLET1_R * 0.206587955583), (0, 0))
            Line((0, 0), (FILLET1_R * 0.339400484434, 0))
        make_face()
    extrude(amount=9.673731027, mode=Mode.SUBTRACT)
    with BuildSketch(Plane(origin=(7.816687655, 1.556605641, 0), x_dir=(-0.18893420316731485, -0.2599958550922788, -0.946945627904985), z_dir=(-0.8089634933040131, 0.587858883152554, 0)), Plane(origin=(3.908343828, 1.556605641, 6.769450083), x_dir=(0.7256118681846656, -0.25999585509228007, -0.6370946335391575), z_dir=(-0.40448174665200737, 0.5878588831525533, -0.7005829359354782)), Plane(origin=(-3.908343828, 1.556605641, 6.769450083), x_dir=(0.9145460713519806, -0.25999585509227907, 0.30985099436582814), z_dir=(0.4044817466520063, 0.5878588831525535, -0.7005829359354784))) as fillet1_piece_4:
        with BuildLine():
            CenterArc((FILLET1_R * 0.339400484434, FILLET1_R), FILLET1_R, 232.505525498, 37.494474502)
            Line((-FILLET1_R * 0.269284432231, FILLET1_R * 0.206587955583), (0, 0))
            Line((0, 0), (FILLET1_R * 0.339400484434, 0))
        make_face()
    extrude(amount=9.673731027, mode=Mode.SUBTRACT)


solid = part.part
